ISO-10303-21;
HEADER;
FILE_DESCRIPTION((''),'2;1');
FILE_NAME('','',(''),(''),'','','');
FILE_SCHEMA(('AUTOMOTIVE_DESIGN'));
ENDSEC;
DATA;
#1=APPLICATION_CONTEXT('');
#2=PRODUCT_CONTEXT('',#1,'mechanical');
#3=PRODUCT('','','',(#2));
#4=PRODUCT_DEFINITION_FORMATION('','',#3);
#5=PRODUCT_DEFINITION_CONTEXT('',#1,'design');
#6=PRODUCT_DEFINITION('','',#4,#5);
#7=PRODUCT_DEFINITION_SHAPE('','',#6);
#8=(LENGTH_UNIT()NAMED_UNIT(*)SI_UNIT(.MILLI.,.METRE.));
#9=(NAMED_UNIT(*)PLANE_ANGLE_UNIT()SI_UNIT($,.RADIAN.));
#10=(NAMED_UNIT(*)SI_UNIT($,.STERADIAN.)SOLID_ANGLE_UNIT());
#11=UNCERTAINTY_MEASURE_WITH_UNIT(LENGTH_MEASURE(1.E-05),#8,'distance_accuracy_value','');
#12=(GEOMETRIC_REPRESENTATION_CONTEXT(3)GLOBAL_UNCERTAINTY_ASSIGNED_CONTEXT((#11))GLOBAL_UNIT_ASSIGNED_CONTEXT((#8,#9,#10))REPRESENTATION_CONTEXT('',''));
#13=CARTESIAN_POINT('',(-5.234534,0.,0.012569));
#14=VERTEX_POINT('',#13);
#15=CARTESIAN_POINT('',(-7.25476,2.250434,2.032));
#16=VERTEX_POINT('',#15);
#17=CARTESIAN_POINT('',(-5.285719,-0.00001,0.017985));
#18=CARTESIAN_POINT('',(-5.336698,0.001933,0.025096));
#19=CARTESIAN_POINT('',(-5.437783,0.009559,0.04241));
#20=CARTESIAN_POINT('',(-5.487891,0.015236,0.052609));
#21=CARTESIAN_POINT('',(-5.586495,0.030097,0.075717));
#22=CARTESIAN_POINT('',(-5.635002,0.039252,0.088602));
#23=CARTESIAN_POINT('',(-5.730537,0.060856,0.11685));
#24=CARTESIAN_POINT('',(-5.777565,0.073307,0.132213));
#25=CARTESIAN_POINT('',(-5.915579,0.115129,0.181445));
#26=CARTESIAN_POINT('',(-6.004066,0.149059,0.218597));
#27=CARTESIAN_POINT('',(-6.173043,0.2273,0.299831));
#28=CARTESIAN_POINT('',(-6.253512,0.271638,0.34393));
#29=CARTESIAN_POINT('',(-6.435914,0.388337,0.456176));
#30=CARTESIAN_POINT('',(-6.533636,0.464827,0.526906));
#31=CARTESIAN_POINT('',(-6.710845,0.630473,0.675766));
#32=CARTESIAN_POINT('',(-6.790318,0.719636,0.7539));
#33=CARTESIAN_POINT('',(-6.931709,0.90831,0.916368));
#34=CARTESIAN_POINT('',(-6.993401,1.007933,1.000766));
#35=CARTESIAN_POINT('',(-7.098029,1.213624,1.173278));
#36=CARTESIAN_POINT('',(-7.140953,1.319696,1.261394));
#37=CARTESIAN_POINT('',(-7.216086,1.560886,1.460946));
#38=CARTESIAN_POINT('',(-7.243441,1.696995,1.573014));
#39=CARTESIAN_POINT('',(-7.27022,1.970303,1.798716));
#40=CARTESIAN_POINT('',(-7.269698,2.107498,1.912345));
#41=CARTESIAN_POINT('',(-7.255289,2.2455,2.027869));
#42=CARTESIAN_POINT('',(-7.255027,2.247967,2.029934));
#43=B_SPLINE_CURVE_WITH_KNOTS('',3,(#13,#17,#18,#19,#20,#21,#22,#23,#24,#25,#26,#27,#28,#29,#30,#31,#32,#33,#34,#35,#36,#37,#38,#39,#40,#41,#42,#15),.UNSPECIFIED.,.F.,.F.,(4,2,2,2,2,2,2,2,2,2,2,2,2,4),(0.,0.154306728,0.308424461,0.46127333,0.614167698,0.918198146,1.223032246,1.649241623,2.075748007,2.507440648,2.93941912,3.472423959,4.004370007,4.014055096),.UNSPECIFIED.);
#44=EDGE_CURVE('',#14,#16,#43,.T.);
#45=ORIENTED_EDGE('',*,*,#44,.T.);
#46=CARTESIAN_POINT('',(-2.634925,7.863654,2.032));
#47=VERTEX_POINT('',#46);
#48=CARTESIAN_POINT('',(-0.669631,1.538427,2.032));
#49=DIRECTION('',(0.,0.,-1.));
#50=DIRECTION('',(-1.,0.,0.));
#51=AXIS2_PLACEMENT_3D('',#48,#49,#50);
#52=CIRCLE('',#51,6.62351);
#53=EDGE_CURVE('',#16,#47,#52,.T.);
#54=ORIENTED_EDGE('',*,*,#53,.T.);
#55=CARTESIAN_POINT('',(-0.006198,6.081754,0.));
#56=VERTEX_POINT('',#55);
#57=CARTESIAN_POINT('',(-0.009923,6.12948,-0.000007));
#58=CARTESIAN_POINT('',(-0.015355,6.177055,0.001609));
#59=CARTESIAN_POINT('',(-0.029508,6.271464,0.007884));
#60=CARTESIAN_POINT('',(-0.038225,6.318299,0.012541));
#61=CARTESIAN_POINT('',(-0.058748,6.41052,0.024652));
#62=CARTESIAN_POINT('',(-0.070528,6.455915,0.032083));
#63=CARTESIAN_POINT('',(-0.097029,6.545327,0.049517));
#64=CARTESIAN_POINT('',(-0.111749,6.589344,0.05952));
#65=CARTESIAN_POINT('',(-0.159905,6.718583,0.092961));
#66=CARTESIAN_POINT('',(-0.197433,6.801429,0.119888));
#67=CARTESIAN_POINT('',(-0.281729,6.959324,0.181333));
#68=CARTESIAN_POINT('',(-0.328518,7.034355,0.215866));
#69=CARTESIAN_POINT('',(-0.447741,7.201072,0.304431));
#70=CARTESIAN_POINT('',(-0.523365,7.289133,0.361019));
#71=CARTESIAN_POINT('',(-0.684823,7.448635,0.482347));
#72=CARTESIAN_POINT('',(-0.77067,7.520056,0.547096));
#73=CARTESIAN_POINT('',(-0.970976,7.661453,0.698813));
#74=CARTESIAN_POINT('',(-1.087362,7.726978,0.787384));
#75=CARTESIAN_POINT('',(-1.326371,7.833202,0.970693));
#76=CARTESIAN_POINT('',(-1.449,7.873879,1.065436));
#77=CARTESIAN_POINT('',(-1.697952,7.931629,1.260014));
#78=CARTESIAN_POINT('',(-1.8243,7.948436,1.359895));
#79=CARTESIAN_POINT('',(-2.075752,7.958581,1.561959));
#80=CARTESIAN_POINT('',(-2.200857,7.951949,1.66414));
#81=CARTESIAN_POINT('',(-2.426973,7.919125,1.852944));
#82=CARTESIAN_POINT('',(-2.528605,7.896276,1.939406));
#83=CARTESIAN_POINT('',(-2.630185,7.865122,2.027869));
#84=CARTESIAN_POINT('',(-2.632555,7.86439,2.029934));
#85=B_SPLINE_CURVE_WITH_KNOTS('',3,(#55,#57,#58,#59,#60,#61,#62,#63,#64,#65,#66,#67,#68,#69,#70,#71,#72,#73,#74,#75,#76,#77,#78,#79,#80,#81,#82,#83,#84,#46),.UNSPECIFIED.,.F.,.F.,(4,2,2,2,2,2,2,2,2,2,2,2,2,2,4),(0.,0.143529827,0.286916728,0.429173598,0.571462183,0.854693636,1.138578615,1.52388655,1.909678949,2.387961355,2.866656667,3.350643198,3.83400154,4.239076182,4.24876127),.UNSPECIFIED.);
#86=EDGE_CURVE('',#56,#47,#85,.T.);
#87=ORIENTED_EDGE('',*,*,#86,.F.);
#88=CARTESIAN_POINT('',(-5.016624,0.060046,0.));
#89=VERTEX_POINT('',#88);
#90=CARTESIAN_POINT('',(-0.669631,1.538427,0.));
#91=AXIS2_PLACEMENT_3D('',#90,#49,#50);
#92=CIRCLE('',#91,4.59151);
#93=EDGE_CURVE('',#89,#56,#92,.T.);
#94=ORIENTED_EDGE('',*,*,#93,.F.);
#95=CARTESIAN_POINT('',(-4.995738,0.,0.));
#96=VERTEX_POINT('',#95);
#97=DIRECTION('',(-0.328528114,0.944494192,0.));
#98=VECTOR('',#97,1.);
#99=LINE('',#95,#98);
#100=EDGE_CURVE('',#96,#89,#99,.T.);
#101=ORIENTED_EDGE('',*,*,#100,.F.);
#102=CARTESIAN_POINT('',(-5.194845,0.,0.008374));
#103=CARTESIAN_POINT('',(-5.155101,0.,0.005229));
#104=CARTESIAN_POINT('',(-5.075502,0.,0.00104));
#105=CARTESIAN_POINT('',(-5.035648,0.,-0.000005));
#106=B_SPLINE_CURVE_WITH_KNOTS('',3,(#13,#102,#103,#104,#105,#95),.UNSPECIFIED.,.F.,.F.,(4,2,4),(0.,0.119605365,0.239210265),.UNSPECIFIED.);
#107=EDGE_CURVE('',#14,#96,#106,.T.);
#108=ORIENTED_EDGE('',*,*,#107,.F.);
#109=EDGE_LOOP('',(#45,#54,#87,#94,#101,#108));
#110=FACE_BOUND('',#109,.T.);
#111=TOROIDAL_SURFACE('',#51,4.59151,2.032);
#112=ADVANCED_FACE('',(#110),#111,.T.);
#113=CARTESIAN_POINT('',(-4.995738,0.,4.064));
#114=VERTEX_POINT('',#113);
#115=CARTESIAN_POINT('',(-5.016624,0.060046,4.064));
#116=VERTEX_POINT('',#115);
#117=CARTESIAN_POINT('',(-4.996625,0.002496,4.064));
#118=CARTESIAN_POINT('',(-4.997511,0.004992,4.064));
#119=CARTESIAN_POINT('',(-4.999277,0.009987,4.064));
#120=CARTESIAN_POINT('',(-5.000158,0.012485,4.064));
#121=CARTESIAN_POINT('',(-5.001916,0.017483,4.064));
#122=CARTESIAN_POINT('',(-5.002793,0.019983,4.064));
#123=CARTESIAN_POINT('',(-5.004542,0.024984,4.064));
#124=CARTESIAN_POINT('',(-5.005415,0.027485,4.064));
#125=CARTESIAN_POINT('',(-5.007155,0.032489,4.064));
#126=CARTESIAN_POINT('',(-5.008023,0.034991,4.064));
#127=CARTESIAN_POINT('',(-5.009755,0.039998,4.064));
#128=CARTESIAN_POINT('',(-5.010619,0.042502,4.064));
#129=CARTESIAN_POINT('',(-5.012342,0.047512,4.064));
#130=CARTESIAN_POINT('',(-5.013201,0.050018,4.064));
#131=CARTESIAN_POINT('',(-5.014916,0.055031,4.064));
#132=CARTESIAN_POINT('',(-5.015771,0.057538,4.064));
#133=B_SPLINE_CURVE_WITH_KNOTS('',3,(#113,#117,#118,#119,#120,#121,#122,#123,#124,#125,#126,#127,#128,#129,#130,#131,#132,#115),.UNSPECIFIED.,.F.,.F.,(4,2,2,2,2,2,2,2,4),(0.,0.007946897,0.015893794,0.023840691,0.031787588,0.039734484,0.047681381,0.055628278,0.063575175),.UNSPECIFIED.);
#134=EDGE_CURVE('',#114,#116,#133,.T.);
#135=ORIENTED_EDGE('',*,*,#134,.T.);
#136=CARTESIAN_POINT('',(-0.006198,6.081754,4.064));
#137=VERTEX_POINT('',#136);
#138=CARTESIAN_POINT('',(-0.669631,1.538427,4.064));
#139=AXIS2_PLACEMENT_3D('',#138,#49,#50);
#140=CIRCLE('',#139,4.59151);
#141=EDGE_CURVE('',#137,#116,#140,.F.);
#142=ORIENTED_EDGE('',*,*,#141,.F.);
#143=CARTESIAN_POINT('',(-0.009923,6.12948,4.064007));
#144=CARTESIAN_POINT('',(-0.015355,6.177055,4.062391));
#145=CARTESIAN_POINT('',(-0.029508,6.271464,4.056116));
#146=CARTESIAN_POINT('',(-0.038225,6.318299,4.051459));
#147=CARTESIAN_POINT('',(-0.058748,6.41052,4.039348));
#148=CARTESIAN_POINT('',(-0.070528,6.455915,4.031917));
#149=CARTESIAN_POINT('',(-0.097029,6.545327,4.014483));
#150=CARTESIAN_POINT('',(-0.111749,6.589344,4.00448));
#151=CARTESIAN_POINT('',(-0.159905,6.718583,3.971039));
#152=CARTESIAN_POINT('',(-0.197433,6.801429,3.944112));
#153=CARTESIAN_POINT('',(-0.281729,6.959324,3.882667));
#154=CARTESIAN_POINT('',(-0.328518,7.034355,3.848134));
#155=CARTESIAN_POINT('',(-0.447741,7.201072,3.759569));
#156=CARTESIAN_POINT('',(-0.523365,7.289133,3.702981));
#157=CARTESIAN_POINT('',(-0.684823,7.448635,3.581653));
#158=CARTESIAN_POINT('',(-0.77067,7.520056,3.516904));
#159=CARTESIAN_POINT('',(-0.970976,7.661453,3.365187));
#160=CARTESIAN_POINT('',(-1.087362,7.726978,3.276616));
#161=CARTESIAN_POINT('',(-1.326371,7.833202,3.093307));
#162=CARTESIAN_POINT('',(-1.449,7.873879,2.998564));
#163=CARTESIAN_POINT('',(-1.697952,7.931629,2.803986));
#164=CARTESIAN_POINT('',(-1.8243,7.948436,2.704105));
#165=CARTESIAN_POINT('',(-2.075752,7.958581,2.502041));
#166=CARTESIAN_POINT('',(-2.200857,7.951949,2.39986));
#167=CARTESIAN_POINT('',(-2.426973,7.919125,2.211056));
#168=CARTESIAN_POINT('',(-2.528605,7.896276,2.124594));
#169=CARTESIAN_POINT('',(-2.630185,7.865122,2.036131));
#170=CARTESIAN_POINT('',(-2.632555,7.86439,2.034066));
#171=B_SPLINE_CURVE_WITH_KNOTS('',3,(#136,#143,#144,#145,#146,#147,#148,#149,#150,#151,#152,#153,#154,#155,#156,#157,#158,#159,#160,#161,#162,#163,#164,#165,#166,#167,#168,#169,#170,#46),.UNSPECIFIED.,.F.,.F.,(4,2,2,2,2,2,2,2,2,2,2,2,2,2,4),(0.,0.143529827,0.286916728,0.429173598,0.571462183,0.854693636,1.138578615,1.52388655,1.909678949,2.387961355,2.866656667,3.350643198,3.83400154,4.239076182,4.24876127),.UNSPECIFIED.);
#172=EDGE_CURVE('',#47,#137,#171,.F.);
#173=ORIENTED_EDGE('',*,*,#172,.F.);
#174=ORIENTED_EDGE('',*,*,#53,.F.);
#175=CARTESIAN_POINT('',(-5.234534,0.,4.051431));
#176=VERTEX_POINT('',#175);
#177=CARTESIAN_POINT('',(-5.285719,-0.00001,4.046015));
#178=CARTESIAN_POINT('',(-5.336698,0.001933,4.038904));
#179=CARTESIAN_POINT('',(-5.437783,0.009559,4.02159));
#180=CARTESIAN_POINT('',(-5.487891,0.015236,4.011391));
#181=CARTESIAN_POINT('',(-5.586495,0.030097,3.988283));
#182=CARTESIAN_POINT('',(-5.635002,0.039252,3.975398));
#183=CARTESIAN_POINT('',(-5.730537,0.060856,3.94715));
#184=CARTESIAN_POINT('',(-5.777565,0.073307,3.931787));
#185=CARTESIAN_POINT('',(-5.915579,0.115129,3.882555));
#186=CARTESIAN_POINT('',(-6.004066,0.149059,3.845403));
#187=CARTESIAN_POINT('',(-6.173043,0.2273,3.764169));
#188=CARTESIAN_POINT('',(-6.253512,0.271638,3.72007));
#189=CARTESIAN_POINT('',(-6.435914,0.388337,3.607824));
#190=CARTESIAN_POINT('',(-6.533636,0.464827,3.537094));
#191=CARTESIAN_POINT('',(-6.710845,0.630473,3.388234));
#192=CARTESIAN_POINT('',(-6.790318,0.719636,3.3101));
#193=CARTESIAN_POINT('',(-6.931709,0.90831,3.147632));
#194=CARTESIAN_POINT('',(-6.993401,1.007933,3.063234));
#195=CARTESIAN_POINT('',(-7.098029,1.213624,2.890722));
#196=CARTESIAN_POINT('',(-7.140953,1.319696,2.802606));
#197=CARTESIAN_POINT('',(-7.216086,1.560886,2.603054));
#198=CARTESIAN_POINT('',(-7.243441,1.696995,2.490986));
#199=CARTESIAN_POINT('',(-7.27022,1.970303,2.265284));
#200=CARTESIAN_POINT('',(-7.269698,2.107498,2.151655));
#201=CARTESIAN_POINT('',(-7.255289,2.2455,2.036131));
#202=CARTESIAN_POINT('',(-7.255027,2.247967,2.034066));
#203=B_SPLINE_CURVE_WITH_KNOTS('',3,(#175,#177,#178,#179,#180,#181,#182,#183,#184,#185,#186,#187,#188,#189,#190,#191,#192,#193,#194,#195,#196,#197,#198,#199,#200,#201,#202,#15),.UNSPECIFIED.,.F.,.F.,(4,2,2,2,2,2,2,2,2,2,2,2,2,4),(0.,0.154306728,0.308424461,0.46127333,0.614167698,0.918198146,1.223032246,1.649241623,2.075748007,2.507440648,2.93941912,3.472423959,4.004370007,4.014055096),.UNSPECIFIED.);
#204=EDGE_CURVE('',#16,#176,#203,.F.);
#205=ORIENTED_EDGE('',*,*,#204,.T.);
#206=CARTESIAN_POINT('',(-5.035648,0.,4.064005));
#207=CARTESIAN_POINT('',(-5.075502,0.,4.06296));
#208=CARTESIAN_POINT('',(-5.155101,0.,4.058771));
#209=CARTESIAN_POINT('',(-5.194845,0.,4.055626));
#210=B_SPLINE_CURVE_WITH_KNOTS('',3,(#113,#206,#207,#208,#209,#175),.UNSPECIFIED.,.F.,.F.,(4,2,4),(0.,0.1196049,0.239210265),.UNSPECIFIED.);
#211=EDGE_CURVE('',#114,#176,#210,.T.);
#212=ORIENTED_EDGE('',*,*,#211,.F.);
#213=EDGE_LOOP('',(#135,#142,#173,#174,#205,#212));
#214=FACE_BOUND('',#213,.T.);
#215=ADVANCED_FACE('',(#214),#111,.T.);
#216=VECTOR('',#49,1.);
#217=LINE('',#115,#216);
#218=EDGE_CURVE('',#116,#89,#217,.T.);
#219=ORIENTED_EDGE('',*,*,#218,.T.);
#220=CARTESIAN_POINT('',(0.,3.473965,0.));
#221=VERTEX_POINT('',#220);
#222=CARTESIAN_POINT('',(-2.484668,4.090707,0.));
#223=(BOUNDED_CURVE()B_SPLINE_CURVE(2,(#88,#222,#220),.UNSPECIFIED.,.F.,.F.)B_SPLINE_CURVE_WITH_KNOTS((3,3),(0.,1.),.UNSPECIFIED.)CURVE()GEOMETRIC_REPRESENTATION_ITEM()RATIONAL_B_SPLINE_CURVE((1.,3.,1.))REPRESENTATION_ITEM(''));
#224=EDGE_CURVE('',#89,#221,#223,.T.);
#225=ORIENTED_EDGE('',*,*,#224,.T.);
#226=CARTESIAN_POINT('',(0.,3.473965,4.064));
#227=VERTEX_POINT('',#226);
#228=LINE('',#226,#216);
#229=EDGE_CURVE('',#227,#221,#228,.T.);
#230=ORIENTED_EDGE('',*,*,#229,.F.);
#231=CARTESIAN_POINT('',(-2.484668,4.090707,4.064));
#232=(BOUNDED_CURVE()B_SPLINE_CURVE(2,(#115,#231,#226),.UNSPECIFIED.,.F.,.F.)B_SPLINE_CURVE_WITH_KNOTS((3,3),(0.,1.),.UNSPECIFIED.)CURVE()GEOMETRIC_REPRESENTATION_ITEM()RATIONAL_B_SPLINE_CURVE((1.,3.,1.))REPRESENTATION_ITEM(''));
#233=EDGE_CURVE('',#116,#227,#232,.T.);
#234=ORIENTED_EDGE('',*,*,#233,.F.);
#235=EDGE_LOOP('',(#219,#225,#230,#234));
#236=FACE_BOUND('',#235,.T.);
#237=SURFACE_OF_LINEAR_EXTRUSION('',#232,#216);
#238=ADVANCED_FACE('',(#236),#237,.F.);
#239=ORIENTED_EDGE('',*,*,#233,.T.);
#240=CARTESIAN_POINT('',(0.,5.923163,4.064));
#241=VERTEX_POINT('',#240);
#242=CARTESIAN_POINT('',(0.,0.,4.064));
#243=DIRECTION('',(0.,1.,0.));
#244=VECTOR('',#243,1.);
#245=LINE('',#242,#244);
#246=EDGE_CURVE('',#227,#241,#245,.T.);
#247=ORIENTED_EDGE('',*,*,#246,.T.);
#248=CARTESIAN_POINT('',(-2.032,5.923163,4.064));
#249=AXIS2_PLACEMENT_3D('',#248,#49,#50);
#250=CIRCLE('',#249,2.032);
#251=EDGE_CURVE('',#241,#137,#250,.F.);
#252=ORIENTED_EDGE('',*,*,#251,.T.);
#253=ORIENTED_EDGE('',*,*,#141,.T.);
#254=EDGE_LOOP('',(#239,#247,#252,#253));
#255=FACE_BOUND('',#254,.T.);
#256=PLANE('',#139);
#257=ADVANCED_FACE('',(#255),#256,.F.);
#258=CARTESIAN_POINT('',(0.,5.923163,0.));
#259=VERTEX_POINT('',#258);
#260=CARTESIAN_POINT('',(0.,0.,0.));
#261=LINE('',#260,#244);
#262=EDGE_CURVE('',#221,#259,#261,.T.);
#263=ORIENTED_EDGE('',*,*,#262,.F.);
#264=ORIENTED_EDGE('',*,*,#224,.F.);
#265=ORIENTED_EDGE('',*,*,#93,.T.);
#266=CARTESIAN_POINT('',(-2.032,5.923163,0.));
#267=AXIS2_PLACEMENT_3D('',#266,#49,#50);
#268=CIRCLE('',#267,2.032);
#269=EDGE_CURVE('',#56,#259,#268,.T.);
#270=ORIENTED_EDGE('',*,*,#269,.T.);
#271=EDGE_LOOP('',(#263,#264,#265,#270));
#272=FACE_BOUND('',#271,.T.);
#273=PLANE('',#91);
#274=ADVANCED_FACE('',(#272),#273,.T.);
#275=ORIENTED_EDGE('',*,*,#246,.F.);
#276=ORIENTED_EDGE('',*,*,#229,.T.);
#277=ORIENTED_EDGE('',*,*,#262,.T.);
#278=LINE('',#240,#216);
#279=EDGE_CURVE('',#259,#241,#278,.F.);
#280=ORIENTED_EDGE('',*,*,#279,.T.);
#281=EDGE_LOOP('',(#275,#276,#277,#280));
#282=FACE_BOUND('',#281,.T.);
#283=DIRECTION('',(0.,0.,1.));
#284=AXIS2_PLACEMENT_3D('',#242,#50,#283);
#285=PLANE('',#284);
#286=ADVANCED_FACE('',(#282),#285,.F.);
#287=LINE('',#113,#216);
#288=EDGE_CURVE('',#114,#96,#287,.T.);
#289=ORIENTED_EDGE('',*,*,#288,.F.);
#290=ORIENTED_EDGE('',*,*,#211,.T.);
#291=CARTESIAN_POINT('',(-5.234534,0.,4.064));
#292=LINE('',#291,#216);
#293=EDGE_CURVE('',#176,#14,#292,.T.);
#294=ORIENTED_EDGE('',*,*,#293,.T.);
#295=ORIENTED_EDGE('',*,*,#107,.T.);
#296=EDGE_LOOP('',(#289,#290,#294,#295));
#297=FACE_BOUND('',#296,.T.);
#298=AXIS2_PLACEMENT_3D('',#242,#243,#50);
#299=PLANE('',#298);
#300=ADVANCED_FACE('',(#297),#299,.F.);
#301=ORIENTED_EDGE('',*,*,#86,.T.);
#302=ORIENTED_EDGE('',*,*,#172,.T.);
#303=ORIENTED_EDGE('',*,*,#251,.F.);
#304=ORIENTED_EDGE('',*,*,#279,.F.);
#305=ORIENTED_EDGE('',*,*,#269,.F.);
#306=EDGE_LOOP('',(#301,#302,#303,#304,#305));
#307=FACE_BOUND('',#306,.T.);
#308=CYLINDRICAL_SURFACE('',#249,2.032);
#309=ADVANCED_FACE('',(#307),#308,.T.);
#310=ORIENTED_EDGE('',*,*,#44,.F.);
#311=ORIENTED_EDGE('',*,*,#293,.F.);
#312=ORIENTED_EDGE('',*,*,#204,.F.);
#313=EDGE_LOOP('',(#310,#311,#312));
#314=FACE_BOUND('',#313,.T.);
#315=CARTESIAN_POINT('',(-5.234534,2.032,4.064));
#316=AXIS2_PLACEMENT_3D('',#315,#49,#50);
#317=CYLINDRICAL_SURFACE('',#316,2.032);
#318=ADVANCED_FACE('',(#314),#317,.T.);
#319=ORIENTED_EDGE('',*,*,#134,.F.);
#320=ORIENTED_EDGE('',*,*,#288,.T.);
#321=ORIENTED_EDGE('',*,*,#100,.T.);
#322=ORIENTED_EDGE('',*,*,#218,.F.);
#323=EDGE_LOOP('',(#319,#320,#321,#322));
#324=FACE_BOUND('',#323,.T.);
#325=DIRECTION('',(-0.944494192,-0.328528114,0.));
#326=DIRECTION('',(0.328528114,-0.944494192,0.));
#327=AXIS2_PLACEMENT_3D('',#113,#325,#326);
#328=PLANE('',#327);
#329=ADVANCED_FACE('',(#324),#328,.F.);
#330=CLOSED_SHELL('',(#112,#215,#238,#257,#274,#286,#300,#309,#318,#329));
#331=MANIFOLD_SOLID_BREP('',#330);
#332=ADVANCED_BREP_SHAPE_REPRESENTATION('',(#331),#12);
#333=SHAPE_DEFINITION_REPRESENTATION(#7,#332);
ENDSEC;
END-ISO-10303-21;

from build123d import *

# Parameters (mm, degrees)
BOSS_EXTRUDE1_DEPTH = 5.08
FILLET1_R           = 2.54
CUT_EXTRUDE1_DEPTH  = 5.08
SCALE1_SCALE        = 0.8


with BuildPart() as part:
    # Sketch2 → Boss-Extrude1 (new body)
    with BuildSketch(Plane.XY):
        with BuildLine():
            Line((0, 0), (-8.89, 0))
            ThreePointArc((-8.89, 0), (-7.067912046, 7.37504804), (0, 10.16))
            Line((0, 10.16), (0, 0))
        make_face()
    extrude(amount=BOSS_EXTRUDE1_DEPTH)

    # Fillet1
    fillet1_edges = [part.edges().sort_by_distance(p)[0] for p in [
        (-7.067912046, 7.37504804, 0),
        (-8.89, 0, 2.54),
        (0, 10.16, 2.54),
        (-7.067912046, 7.37504804, 5.08),
    ]]
    fillet(fillet1_edges, radius=FILLET1_R - 0.0001)  # a hair under: the kernel refuses the full size

    # Sketch4 → Cut-Extrude1 (cut)
    with BuildSketch(Plane.XY):
        with BuildLine():
            Line((0, 4.342456755), (0, 0))
            Line((0, 0), (-6.244672338, 0))
            Line((-6.244672338, 0), (-6.270779923, 0.075057389))
            add(Edge.make_bspline(
                [(-6.270779923, 0.075057389), (-3.105835382, 5.113383938), (0, 4.342456755)],
                knots=[0, 0, 0, 1, 1, 1], degree=2, weights=[1, 3, 1]))
        make_face()
    extrude(amount=CUT_EXTRUDE1_DEPTH, mode=Mode.SUBTRACT)


with BuildPart() as part_1:
    # Scale1: scaled about (0, 0, 0)
    add(part.part.scale(SCALE1_SCALE))


solid = part_1.part
